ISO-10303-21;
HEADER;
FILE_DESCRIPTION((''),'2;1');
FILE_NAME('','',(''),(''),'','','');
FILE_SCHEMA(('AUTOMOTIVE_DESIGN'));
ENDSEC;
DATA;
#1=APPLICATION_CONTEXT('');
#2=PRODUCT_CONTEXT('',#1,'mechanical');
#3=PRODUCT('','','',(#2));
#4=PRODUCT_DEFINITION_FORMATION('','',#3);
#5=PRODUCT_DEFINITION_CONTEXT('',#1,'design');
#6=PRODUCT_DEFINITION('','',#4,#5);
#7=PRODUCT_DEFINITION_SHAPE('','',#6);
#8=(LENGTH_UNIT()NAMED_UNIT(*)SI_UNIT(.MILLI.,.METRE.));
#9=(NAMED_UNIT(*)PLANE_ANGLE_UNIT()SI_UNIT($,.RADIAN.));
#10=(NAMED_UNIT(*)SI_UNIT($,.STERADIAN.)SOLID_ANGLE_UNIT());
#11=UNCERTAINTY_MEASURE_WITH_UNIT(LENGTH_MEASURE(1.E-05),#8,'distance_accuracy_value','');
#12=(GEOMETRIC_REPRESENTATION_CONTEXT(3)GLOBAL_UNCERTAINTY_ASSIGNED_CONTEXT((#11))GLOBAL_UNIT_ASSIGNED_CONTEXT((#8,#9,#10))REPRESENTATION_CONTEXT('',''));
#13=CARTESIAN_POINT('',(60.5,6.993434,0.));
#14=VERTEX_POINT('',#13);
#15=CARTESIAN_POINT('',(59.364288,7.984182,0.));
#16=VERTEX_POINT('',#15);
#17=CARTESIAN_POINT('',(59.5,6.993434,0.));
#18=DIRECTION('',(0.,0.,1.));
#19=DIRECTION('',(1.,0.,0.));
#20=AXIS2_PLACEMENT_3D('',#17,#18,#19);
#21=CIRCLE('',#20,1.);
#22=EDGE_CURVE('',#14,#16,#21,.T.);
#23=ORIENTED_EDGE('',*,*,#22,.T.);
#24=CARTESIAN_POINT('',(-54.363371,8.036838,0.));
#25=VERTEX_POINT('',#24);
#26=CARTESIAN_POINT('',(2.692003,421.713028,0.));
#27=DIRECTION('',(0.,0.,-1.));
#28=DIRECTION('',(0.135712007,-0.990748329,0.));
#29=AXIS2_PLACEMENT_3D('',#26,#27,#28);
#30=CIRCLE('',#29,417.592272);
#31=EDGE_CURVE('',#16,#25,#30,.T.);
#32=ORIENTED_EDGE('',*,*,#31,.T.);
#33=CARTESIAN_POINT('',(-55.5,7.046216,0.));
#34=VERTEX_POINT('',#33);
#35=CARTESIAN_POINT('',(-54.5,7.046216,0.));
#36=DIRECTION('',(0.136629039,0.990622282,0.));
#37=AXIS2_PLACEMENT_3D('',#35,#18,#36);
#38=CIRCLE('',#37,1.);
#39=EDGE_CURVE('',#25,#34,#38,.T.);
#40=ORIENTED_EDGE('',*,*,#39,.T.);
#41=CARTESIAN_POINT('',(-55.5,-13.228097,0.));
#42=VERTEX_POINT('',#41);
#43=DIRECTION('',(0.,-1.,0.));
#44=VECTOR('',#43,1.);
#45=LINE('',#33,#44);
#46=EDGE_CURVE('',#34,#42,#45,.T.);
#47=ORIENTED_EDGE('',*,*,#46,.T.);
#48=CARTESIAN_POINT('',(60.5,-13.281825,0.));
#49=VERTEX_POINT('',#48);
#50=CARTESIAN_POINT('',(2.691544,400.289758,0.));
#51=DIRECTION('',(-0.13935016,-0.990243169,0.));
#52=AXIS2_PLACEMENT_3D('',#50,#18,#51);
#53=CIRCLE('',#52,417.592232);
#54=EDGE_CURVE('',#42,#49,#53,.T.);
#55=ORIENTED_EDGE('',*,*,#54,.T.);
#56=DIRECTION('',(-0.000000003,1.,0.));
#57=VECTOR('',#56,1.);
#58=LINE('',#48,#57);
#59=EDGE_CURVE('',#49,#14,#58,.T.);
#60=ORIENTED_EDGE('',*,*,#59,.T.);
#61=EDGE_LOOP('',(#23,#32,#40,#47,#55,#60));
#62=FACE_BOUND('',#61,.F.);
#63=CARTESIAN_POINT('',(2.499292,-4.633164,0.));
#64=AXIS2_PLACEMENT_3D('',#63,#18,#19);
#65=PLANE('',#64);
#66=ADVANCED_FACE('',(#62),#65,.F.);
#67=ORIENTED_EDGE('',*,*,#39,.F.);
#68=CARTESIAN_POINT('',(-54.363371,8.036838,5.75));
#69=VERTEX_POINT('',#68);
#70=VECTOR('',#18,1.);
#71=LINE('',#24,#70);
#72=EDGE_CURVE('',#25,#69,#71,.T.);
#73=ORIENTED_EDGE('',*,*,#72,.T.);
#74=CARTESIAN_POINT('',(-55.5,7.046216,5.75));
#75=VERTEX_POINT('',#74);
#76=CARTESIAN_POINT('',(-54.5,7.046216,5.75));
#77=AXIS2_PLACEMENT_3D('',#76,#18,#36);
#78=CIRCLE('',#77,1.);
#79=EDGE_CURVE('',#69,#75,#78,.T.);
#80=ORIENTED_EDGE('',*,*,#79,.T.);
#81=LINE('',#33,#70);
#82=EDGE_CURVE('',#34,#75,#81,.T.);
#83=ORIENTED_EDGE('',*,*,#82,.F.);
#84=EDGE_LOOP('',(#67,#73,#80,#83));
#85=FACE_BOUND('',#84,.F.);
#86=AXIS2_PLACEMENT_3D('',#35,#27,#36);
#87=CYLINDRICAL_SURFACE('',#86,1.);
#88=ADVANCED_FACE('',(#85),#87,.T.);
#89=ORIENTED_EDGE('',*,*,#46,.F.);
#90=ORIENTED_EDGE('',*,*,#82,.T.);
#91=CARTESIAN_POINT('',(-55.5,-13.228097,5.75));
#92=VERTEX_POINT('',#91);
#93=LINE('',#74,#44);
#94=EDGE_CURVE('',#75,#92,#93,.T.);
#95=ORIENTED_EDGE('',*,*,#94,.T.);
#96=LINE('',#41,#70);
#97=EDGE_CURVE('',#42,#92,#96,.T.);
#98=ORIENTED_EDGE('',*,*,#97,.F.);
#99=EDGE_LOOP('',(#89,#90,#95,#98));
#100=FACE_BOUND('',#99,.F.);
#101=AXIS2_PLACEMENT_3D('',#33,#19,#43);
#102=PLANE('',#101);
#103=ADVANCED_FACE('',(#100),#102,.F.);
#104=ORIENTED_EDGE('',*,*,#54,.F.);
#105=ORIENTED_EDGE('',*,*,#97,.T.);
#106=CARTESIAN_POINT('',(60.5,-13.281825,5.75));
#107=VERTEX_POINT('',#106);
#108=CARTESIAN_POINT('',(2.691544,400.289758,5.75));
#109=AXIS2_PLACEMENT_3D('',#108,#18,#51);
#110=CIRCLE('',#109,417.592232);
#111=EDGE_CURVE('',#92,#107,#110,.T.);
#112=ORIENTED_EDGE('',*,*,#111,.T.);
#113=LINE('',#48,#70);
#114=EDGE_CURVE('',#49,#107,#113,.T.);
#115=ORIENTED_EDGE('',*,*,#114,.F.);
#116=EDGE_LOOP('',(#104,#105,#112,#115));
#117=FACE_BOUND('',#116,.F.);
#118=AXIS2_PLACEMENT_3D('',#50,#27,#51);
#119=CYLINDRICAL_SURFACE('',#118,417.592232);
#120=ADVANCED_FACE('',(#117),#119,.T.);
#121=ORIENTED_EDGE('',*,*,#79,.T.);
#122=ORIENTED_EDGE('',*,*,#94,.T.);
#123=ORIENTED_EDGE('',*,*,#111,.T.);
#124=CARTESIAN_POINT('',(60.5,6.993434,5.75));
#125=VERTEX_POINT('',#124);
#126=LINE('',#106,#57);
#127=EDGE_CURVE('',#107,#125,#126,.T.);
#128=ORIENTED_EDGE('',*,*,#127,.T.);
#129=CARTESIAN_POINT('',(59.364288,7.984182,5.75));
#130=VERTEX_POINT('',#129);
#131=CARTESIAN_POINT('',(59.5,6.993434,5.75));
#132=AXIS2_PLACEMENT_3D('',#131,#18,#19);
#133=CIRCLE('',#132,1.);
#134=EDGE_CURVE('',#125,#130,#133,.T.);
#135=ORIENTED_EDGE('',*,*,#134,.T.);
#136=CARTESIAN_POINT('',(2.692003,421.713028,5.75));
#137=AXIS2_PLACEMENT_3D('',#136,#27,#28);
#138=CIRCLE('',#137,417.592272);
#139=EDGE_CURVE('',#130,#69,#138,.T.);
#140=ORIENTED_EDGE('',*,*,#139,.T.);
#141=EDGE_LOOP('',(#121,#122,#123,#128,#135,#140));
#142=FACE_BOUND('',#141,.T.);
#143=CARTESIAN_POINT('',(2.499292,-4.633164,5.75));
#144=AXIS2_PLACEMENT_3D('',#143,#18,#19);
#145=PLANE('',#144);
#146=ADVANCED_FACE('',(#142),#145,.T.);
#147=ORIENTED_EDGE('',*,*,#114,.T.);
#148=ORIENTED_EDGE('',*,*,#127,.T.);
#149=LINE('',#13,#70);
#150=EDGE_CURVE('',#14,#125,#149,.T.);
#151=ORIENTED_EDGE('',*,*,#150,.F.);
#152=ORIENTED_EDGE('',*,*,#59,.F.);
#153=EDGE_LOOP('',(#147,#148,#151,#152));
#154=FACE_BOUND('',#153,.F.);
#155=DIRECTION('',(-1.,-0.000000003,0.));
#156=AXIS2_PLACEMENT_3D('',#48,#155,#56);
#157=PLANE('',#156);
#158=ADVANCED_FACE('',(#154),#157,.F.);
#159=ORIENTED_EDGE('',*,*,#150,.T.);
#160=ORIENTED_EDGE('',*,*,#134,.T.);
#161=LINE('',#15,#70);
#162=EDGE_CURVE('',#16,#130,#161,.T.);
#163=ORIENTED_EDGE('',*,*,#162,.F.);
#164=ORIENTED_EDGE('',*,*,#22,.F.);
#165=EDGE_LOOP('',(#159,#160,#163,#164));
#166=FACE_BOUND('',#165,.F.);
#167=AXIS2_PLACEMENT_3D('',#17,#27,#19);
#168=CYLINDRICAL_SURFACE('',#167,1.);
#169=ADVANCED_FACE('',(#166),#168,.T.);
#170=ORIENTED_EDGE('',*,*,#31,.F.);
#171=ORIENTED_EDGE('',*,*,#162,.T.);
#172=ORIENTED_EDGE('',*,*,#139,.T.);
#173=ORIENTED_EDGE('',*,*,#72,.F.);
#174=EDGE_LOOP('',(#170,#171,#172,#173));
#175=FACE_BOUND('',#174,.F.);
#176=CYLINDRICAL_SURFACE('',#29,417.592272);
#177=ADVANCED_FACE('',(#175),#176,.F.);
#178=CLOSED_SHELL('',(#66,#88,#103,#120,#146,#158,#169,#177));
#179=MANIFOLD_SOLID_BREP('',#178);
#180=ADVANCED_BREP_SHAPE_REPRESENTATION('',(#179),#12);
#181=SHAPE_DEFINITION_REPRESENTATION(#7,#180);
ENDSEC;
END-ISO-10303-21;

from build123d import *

# Parameters (mm, degrees)
F1_DEPTH = 5.75


# Not quite as in the source:
# - ends of sketch curves that miss each other by under 0.0002 mm in the source are joined


with BuildPart() as f1:
    # F0 (on Top) → F1 (new body)
    with BuildSketch(Plane.XY):
        with BuildLine():
            ThreePointArc((-54.3633709611, 8.0368382821), (-55.1570277624, 7.8000823804), (-55.5, 7.046216))
            Line((-55.5, 7.046216), (-55.5, -13.228097))
            ThreePointArc((-55.5, -13.228097), (2.4981253193, -17.3024292075), (60.5000000667, -13.2818254774))
            Line((60.5000000667, -13.2818254774), (60.5, 6.993434))
            ThreePointArc((60.5, 6.993434), (60.1573766387, 7.7469961772), (59.3642880901, 7.9841823422))
            ThreePointArc((59.3642880901, 7.9841823422), (2.4986576004, 4.1208007581), (-54.3633709611, 8.0368382821))
        make_face()
    extrude(amount=F1_DEPTH)


solid = f1.part
